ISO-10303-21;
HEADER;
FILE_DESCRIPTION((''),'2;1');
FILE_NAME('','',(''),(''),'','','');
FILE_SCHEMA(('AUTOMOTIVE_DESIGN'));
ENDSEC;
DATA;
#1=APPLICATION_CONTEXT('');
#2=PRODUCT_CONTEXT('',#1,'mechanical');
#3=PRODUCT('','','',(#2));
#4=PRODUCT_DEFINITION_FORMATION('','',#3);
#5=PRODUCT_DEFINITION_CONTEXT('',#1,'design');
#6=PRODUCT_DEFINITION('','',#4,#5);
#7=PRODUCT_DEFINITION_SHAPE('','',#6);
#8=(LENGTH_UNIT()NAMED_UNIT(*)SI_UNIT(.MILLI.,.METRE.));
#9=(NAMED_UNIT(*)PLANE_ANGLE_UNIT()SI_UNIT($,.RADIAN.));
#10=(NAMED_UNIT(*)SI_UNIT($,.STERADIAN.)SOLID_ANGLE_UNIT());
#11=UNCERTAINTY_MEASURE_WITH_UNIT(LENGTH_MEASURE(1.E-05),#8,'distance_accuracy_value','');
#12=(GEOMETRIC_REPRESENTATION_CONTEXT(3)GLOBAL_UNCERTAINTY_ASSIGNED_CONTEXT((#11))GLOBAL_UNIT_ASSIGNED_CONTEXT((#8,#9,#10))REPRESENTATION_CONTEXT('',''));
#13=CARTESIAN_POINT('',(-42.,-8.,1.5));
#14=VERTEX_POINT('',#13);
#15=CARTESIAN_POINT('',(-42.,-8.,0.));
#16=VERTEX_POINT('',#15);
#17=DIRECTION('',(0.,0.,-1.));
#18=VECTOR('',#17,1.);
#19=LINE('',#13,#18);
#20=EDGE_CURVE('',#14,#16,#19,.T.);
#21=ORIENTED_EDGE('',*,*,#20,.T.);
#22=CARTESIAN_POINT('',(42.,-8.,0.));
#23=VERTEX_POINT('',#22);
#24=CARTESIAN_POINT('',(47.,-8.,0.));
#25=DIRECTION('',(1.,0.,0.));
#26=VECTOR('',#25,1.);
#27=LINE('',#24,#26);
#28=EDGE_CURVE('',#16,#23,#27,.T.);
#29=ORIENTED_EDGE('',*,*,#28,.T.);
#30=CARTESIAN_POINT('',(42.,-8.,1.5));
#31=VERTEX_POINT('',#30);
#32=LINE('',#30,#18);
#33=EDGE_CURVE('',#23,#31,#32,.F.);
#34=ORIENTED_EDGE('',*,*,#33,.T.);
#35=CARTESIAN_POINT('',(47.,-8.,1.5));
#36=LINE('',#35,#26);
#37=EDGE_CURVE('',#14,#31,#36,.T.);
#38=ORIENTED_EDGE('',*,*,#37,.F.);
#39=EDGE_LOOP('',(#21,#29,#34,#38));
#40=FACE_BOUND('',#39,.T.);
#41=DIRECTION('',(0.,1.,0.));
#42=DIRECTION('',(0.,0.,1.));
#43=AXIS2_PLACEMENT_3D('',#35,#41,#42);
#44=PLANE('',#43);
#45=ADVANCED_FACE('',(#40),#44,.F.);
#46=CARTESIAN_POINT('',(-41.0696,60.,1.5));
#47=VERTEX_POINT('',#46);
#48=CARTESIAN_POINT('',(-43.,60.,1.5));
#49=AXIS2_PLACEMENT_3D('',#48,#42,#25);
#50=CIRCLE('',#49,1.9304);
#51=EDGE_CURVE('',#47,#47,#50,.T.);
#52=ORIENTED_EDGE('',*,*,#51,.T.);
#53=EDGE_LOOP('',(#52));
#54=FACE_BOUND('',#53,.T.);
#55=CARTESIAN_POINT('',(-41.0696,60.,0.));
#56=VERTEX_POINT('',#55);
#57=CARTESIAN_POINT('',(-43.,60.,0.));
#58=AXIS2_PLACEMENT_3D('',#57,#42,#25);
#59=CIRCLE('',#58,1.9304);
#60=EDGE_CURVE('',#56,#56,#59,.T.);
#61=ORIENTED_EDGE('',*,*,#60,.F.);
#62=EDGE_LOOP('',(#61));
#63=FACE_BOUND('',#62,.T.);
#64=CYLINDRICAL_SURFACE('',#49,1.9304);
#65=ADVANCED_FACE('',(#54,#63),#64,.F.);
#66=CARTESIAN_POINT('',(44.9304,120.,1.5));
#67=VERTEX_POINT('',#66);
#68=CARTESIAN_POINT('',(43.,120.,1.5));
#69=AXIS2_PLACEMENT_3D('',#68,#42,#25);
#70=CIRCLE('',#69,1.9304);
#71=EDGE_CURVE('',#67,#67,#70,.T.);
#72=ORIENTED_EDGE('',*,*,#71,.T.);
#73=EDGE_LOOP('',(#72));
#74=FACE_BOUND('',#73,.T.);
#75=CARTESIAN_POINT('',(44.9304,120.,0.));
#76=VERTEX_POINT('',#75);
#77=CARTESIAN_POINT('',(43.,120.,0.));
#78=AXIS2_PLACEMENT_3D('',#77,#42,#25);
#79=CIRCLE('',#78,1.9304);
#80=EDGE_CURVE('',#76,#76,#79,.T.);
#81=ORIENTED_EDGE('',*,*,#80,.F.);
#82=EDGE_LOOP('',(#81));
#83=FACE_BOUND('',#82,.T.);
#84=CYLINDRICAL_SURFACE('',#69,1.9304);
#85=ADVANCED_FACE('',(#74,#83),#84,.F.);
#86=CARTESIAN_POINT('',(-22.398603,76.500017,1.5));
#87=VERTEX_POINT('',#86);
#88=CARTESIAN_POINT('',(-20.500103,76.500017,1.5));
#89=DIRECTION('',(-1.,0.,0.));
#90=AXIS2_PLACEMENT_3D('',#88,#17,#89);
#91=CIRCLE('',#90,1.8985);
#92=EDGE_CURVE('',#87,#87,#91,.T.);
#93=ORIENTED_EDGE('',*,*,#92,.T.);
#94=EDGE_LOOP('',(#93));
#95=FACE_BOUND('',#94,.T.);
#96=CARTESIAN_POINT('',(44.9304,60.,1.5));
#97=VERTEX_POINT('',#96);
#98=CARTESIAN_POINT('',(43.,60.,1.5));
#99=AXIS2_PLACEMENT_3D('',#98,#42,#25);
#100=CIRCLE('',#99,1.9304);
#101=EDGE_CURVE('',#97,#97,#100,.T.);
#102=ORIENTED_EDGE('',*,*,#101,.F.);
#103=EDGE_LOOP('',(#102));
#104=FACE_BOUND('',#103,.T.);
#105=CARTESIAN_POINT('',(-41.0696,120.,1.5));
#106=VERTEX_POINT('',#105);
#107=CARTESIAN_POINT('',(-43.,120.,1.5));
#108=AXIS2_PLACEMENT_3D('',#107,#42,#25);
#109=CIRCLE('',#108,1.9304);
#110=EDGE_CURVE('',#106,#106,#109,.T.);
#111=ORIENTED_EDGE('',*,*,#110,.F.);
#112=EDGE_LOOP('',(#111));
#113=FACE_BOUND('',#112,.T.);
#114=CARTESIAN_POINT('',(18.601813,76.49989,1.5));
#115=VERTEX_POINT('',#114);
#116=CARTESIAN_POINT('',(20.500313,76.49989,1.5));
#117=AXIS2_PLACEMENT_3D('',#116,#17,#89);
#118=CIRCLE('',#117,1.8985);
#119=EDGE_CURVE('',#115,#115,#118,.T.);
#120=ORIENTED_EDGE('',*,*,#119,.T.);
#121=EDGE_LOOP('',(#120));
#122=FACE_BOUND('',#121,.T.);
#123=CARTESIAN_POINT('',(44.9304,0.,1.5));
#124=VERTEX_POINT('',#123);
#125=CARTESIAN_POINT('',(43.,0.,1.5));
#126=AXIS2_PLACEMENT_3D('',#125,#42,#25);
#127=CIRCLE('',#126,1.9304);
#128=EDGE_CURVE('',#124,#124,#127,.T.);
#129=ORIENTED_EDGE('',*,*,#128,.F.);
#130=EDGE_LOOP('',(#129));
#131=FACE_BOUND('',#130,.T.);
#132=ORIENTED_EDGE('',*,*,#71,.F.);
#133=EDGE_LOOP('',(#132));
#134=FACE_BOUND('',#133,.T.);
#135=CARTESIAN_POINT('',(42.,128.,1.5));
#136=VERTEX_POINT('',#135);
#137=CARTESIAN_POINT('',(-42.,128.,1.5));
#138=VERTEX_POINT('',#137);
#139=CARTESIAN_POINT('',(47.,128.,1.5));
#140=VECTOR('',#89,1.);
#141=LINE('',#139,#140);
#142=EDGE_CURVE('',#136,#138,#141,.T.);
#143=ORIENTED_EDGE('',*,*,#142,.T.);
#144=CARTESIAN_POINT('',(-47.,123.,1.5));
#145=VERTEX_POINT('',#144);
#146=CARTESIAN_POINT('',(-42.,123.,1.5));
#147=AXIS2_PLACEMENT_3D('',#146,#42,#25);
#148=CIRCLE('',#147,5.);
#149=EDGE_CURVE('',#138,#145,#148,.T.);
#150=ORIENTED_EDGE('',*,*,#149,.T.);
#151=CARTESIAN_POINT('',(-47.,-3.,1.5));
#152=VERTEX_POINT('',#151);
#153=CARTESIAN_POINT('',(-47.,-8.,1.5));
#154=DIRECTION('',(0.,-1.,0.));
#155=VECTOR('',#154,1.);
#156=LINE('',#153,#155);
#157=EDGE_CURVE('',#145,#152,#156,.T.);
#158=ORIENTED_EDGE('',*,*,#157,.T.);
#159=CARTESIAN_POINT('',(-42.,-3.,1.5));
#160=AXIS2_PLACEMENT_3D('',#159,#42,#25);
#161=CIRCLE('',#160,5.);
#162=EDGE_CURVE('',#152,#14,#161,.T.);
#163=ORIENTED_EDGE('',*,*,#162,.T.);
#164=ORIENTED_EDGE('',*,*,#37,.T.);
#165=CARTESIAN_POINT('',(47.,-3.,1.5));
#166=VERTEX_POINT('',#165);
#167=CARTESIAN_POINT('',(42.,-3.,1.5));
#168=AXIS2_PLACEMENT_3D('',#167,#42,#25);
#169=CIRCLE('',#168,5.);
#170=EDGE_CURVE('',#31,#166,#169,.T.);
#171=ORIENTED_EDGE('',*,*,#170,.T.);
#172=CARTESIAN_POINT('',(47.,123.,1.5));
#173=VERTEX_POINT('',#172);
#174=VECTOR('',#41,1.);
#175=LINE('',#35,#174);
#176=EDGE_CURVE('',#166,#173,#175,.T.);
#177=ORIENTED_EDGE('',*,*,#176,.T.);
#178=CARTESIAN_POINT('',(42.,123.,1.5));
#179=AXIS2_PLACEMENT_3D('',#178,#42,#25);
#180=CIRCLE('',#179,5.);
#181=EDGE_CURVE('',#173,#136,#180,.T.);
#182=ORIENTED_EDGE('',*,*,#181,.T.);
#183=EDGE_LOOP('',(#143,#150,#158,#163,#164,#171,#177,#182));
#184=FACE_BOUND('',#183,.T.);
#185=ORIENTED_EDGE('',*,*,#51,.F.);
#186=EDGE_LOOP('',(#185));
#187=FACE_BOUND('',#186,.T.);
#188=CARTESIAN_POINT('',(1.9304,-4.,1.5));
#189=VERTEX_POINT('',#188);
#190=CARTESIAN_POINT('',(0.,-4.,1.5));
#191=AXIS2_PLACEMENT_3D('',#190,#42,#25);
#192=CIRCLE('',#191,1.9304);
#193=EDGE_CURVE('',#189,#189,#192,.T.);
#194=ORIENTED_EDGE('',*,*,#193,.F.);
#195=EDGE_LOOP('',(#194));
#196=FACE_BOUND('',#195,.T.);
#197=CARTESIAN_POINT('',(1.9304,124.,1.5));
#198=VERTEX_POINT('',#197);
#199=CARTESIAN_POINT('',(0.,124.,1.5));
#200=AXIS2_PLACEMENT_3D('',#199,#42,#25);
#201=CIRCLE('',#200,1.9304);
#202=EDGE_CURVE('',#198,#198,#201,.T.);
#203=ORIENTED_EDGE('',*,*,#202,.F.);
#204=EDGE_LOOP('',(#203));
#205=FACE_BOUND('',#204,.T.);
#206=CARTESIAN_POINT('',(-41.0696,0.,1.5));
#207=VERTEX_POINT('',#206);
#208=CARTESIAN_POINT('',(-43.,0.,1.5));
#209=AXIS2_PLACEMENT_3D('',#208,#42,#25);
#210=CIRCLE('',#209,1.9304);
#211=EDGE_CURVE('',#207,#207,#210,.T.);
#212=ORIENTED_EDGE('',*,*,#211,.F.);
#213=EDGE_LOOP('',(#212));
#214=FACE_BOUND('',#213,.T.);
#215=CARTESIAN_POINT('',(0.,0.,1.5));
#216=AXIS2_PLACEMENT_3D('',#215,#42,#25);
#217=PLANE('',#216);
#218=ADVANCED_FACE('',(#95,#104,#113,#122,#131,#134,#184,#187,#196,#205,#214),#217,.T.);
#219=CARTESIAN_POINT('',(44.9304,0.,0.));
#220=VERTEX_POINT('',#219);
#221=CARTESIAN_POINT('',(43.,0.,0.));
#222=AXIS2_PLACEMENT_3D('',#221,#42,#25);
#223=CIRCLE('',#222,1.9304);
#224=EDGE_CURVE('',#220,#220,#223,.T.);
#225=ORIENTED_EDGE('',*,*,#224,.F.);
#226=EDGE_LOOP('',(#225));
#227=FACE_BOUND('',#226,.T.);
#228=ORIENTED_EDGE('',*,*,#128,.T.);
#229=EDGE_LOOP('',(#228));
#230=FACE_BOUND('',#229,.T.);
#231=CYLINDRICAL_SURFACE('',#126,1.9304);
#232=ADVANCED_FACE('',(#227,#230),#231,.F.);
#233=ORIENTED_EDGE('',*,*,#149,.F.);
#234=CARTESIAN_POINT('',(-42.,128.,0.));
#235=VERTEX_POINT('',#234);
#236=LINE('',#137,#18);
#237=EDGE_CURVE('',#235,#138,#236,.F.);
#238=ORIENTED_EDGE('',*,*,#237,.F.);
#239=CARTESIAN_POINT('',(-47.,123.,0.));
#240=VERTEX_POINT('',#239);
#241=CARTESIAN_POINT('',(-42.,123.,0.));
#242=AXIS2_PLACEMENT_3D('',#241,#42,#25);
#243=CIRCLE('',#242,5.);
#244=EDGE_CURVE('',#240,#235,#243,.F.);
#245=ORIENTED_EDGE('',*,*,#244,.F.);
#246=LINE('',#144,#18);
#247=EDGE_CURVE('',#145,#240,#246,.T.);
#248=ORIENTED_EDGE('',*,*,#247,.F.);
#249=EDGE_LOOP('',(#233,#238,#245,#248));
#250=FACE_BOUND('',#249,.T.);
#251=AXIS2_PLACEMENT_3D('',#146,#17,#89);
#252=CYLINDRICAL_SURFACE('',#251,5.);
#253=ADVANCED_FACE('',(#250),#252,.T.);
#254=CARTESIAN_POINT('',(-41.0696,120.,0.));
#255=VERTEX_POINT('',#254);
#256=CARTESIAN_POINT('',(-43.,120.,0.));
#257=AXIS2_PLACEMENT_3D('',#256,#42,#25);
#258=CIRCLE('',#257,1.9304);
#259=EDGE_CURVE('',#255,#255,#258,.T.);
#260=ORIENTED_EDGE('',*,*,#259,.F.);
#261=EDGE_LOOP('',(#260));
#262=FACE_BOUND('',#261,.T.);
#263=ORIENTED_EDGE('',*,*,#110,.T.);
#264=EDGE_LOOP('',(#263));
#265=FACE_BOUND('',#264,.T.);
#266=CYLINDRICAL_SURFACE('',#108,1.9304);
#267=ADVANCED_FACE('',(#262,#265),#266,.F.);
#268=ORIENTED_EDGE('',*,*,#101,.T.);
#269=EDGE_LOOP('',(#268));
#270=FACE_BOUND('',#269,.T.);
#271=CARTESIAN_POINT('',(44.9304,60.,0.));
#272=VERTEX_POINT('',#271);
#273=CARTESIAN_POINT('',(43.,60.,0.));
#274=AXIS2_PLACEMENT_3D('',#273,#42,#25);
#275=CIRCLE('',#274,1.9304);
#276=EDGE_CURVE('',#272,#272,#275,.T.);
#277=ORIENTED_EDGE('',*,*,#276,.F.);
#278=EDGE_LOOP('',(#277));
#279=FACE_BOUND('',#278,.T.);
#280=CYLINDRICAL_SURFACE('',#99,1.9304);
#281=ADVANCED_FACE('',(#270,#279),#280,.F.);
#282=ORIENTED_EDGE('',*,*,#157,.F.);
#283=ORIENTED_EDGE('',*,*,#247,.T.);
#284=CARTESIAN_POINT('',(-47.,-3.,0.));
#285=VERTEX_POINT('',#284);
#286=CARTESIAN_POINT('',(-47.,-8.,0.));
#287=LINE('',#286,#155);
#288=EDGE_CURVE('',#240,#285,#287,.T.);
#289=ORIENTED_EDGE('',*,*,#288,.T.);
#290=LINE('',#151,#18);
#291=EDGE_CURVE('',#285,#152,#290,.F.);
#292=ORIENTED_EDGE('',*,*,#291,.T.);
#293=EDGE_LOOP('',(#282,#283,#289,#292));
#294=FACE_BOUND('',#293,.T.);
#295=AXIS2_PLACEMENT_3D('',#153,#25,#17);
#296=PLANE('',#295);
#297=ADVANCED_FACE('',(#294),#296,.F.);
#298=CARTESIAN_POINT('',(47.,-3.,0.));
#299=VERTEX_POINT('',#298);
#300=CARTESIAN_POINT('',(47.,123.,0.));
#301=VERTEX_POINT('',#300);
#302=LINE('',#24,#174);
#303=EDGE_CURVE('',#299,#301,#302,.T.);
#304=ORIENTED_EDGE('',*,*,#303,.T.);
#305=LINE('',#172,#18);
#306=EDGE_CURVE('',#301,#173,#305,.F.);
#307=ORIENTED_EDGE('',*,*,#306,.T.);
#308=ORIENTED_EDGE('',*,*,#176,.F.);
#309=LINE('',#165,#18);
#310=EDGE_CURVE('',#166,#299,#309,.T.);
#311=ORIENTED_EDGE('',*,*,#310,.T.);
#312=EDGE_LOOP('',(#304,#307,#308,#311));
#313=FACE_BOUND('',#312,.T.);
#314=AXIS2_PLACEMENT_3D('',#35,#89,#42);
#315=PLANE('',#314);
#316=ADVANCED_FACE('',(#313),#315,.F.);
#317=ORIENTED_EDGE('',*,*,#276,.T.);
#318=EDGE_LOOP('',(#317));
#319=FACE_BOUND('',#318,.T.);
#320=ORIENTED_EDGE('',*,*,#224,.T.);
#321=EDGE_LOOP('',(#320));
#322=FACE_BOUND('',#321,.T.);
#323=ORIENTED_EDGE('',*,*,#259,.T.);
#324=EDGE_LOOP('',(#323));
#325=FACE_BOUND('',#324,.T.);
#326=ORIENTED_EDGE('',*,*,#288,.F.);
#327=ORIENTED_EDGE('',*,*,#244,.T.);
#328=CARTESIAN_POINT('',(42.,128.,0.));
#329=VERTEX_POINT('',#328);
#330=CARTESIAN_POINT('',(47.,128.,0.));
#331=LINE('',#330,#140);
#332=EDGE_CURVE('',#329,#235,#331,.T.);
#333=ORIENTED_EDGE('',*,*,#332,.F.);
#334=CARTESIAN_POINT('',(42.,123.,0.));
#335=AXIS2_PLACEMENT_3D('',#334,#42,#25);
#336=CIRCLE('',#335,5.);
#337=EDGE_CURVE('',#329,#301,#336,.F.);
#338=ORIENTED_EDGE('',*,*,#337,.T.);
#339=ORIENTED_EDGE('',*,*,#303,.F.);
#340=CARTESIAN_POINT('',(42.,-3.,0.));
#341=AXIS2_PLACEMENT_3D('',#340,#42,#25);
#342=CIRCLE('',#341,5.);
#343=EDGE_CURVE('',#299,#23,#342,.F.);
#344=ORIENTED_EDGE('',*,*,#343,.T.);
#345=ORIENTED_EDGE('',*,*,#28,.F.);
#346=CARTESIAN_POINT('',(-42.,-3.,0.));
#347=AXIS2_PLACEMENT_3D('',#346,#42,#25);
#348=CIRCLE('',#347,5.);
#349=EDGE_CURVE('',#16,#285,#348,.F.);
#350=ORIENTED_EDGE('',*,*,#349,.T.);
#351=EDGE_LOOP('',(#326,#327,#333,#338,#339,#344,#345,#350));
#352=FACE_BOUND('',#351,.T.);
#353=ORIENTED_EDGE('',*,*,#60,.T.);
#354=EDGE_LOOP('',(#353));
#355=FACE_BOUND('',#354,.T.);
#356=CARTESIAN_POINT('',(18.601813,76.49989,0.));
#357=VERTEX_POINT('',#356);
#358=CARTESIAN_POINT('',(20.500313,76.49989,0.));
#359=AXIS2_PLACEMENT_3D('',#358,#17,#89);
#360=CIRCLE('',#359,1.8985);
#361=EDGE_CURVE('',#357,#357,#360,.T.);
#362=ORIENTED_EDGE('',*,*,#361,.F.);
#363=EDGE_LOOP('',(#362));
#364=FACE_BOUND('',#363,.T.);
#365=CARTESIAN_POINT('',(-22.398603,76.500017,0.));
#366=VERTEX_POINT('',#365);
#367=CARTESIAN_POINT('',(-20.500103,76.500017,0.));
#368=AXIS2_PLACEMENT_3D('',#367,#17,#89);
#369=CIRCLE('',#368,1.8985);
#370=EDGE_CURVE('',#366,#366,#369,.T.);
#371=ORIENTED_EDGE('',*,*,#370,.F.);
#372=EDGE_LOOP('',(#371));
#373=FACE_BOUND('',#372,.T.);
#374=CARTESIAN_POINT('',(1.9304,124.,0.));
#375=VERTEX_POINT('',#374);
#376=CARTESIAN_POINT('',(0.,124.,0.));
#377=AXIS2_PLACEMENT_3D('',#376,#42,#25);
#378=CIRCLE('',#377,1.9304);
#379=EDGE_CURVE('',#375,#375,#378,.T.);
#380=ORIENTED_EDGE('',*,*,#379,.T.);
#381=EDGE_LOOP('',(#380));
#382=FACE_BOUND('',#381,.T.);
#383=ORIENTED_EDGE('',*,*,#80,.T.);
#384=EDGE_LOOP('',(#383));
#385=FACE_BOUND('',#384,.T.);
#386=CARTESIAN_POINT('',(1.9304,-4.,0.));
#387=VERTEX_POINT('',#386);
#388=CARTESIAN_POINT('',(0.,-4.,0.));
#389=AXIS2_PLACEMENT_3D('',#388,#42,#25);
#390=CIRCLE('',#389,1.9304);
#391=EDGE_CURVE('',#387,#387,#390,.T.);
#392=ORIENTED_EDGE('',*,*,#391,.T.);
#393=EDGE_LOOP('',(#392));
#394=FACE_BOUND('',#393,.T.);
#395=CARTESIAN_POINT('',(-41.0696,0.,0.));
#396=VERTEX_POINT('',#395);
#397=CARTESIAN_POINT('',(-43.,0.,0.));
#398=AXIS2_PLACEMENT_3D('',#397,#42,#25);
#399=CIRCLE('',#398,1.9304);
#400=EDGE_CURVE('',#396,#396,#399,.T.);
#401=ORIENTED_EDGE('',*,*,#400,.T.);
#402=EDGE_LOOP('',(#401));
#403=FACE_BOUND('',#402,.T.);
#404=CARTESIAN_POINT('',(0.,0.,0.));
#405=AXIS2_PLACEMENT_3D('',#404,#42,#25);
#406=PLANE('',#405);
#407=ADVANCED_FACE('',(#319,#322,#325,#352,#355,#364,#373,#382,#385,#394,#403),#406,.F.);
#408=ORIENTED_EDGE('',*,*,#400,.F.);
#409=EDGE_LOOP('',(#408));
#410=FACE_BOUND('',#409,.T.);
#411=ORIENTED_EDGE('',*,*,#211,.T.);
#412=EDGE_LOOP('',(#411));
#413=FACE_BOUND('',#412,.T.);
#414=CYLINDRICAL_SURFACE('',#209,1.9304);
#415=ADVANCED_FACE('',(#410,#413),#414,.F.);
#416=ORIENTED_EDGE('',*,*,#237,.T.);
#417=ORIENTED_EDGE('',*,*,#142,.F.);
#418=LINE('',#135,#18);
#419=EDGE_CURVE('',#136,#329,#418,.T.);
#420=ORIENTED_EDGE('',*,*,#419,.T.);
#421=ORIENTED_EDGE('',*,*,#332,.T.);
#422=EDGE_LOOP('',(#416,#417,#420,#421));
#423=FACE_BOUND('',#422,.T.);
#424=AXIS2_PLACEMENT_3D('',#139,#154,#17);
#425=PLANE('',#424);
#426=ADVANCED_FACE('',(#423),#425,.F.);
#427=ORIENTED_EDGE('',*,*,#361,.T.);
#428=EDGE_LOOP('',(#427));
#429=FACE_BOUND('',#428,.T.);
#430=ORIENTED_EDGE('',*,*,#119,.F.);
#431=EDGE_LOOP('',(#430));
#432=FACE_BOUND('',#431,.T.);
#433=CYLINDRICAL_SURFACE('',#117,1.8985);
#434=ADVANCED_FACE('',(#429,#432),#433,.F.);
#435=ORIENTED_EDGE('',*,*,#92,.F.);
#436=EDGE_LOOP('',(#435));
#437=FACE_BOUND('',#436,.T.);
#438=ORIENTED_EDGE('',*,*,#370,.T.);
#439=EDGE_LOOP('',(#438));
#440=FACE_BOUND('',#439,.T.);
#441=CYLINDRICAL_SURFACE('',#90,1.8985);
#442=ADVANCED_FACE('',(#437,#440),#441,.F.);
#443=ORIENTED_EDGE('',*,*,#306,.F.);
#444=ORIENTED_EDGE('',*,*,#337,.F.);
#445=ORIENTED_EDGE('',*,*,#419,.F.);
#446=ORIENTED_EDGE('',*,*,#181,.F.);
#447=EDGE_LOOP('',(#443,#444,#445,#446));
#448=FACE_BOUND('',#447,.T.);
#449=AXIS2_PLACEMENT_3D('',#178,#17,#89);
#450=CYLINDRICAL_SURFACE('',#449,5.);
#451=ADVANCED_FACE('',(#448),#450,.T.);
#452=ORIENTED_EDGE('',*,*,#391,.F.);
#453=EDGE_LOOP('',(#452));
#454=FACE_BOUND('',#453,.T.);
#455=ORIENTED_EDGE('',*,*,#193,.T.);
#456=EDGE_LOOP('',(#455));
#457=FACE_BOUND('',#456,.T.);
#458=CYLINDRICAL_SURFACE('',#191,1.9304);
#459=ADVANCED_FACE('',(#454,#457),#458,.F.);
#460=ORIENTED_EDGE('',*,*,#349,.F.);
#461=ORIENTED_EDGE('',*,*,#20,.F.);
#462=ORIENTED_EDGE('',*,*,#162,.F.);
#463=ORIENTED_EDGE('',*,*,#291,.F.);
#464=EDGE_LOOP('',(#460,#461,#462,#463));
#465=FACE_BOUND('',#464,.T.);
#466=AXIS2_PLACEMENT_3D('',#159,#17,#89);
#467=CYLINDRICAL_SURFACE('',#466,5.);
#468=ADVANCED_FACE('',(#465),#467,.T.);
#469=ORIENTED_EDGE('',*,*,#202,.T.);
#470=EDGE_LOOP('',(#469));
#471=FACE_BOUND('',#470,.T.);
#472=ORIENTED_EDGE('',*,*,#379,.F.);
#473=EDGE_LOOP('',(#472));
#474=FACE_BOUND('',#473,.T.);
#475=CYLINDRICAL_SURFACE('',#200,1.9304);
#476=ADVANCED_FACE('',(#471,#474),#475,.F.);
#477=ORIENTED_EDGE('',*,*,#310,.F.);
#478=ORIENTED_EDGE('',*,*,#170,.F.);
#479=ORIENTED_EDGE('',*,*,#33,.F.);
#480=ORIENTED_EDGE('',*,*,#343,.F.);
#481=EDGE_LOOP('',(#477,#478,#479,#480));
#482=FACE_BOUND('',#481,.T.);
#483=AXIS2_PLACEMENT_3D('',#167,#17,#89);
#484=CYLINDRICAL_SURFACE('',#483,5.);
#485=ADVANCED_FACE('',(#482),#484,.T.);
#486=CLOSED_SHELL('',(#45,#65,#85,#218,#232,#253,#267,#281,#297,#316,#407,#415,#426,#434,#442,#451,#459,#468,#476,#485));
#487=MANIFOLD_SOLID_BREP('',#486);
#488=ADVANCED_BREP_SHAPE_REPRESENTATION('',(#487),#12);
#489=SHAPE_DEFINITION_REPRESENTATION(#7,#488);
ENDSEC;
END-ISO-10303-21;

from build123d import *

# Parameters (mm, degrees)
SKETCH1_W                 = 94
SKETCH1_H                 = 136
BOSS_EXTRUDE1_DEPTH       = 1.5
FILLET1_R                 = 5
SKETCH_PATTERN1_OUTLINE_R = 1.9304
SKETCH_PATTERN1_DEPTH     = 1.5
SKETCH4_R                 = 1.8985
CUT_EXTRUDE1_DEPTH        = 137.364401513


# Read off the part's stored shape, not the designer's step: Sketch-Pattern1
with BuildPart() as part:
    # Sketch1 → Boss-Extrude1 (new body)
    with BuildSketch(Plane.XY):
        with Locations((0, 60)):
            Rectangle(SKETCH1_W, SKETCH1_H)
    extrude(amount=BOSS_EXTRUDE1_DEPTH)

    # Fillet1
    fillet1_edges = [part.edges().sort_by_distance(p)[0] for p in [
        (47, -8, 0.75),
        (-47, -8, 0.75),
        (-47, 128, 0.75),
        (47, 128, 0.75),
    ]]
    fillet(fillet1_edges, radius=FILLET1_R)

    # Sketch3 → #24 (0.152) Diameter Hole1 (revolve, cut)
    with BuildSketch(Plane(origin=(43, 0, 1.5), x_dir=(0, -1, 0), z_dir=(1, 0, 0))):
        Polygon((0, 0), (0, 13.859901339), (1.9304, 12.7), (1.9304, 0), align=None)
    revolve(axis=Axis((43, 0, 7.85), (0, 0, -1)), mode=Mode.SUBTRACT)

    # Sketch-Pattern1 outline → Sketch-Pattern1 (cut)
    with BuildSketch(Plane.XY):
        with Locations((0, -4)):
            Circle(SKETCH_PATTERN1_OUTLINE_R)
        with Locations((0, 124)):
            Circle(SKETCH_PATTERN1_OUTLINE_R)
        with Locations((43, 120)):
            Circle(SKETCH_PATTERN1_OUTLINE_R)
        with Locations((43, 60)):
            Circle(SKETCH_PATTERN1_OUTLINE_R)
        with Locations((-43, 120)):
            Circle(SKETCH_PATTERN1_OUTLINE_R)
        with Locations((-43, 60)):
            Circle(SKETCH_PATTERN1_OUTLINE_R)
        with Locations((-43, 0)):
            Circle(SKETCH_PATTERN1_OUTLINE_R)
    extrude(amount=SKETCH_PATTERN1_DEPTH, mode=Mode.SUBTRACT)

    # Sketch4 → Cut-Extrude1 (cut, through all)
    with BuildSketch(Plane(origin=(0, 0, 0), x_dir=(-1, 0, 0), z_dir=(0, 0, -1))):
        with Locations((20.500102944, 76.500016768)):
            Circle(SKETCH4_R)
        with Locations((-20.500312859, 76.499889767)):
            Circle(SKETCH4_R)
    extrude(amount=-CUT_EXTRUDE1_DEPTH, mode=Mode.SUBTRACT)


solid = part.part
